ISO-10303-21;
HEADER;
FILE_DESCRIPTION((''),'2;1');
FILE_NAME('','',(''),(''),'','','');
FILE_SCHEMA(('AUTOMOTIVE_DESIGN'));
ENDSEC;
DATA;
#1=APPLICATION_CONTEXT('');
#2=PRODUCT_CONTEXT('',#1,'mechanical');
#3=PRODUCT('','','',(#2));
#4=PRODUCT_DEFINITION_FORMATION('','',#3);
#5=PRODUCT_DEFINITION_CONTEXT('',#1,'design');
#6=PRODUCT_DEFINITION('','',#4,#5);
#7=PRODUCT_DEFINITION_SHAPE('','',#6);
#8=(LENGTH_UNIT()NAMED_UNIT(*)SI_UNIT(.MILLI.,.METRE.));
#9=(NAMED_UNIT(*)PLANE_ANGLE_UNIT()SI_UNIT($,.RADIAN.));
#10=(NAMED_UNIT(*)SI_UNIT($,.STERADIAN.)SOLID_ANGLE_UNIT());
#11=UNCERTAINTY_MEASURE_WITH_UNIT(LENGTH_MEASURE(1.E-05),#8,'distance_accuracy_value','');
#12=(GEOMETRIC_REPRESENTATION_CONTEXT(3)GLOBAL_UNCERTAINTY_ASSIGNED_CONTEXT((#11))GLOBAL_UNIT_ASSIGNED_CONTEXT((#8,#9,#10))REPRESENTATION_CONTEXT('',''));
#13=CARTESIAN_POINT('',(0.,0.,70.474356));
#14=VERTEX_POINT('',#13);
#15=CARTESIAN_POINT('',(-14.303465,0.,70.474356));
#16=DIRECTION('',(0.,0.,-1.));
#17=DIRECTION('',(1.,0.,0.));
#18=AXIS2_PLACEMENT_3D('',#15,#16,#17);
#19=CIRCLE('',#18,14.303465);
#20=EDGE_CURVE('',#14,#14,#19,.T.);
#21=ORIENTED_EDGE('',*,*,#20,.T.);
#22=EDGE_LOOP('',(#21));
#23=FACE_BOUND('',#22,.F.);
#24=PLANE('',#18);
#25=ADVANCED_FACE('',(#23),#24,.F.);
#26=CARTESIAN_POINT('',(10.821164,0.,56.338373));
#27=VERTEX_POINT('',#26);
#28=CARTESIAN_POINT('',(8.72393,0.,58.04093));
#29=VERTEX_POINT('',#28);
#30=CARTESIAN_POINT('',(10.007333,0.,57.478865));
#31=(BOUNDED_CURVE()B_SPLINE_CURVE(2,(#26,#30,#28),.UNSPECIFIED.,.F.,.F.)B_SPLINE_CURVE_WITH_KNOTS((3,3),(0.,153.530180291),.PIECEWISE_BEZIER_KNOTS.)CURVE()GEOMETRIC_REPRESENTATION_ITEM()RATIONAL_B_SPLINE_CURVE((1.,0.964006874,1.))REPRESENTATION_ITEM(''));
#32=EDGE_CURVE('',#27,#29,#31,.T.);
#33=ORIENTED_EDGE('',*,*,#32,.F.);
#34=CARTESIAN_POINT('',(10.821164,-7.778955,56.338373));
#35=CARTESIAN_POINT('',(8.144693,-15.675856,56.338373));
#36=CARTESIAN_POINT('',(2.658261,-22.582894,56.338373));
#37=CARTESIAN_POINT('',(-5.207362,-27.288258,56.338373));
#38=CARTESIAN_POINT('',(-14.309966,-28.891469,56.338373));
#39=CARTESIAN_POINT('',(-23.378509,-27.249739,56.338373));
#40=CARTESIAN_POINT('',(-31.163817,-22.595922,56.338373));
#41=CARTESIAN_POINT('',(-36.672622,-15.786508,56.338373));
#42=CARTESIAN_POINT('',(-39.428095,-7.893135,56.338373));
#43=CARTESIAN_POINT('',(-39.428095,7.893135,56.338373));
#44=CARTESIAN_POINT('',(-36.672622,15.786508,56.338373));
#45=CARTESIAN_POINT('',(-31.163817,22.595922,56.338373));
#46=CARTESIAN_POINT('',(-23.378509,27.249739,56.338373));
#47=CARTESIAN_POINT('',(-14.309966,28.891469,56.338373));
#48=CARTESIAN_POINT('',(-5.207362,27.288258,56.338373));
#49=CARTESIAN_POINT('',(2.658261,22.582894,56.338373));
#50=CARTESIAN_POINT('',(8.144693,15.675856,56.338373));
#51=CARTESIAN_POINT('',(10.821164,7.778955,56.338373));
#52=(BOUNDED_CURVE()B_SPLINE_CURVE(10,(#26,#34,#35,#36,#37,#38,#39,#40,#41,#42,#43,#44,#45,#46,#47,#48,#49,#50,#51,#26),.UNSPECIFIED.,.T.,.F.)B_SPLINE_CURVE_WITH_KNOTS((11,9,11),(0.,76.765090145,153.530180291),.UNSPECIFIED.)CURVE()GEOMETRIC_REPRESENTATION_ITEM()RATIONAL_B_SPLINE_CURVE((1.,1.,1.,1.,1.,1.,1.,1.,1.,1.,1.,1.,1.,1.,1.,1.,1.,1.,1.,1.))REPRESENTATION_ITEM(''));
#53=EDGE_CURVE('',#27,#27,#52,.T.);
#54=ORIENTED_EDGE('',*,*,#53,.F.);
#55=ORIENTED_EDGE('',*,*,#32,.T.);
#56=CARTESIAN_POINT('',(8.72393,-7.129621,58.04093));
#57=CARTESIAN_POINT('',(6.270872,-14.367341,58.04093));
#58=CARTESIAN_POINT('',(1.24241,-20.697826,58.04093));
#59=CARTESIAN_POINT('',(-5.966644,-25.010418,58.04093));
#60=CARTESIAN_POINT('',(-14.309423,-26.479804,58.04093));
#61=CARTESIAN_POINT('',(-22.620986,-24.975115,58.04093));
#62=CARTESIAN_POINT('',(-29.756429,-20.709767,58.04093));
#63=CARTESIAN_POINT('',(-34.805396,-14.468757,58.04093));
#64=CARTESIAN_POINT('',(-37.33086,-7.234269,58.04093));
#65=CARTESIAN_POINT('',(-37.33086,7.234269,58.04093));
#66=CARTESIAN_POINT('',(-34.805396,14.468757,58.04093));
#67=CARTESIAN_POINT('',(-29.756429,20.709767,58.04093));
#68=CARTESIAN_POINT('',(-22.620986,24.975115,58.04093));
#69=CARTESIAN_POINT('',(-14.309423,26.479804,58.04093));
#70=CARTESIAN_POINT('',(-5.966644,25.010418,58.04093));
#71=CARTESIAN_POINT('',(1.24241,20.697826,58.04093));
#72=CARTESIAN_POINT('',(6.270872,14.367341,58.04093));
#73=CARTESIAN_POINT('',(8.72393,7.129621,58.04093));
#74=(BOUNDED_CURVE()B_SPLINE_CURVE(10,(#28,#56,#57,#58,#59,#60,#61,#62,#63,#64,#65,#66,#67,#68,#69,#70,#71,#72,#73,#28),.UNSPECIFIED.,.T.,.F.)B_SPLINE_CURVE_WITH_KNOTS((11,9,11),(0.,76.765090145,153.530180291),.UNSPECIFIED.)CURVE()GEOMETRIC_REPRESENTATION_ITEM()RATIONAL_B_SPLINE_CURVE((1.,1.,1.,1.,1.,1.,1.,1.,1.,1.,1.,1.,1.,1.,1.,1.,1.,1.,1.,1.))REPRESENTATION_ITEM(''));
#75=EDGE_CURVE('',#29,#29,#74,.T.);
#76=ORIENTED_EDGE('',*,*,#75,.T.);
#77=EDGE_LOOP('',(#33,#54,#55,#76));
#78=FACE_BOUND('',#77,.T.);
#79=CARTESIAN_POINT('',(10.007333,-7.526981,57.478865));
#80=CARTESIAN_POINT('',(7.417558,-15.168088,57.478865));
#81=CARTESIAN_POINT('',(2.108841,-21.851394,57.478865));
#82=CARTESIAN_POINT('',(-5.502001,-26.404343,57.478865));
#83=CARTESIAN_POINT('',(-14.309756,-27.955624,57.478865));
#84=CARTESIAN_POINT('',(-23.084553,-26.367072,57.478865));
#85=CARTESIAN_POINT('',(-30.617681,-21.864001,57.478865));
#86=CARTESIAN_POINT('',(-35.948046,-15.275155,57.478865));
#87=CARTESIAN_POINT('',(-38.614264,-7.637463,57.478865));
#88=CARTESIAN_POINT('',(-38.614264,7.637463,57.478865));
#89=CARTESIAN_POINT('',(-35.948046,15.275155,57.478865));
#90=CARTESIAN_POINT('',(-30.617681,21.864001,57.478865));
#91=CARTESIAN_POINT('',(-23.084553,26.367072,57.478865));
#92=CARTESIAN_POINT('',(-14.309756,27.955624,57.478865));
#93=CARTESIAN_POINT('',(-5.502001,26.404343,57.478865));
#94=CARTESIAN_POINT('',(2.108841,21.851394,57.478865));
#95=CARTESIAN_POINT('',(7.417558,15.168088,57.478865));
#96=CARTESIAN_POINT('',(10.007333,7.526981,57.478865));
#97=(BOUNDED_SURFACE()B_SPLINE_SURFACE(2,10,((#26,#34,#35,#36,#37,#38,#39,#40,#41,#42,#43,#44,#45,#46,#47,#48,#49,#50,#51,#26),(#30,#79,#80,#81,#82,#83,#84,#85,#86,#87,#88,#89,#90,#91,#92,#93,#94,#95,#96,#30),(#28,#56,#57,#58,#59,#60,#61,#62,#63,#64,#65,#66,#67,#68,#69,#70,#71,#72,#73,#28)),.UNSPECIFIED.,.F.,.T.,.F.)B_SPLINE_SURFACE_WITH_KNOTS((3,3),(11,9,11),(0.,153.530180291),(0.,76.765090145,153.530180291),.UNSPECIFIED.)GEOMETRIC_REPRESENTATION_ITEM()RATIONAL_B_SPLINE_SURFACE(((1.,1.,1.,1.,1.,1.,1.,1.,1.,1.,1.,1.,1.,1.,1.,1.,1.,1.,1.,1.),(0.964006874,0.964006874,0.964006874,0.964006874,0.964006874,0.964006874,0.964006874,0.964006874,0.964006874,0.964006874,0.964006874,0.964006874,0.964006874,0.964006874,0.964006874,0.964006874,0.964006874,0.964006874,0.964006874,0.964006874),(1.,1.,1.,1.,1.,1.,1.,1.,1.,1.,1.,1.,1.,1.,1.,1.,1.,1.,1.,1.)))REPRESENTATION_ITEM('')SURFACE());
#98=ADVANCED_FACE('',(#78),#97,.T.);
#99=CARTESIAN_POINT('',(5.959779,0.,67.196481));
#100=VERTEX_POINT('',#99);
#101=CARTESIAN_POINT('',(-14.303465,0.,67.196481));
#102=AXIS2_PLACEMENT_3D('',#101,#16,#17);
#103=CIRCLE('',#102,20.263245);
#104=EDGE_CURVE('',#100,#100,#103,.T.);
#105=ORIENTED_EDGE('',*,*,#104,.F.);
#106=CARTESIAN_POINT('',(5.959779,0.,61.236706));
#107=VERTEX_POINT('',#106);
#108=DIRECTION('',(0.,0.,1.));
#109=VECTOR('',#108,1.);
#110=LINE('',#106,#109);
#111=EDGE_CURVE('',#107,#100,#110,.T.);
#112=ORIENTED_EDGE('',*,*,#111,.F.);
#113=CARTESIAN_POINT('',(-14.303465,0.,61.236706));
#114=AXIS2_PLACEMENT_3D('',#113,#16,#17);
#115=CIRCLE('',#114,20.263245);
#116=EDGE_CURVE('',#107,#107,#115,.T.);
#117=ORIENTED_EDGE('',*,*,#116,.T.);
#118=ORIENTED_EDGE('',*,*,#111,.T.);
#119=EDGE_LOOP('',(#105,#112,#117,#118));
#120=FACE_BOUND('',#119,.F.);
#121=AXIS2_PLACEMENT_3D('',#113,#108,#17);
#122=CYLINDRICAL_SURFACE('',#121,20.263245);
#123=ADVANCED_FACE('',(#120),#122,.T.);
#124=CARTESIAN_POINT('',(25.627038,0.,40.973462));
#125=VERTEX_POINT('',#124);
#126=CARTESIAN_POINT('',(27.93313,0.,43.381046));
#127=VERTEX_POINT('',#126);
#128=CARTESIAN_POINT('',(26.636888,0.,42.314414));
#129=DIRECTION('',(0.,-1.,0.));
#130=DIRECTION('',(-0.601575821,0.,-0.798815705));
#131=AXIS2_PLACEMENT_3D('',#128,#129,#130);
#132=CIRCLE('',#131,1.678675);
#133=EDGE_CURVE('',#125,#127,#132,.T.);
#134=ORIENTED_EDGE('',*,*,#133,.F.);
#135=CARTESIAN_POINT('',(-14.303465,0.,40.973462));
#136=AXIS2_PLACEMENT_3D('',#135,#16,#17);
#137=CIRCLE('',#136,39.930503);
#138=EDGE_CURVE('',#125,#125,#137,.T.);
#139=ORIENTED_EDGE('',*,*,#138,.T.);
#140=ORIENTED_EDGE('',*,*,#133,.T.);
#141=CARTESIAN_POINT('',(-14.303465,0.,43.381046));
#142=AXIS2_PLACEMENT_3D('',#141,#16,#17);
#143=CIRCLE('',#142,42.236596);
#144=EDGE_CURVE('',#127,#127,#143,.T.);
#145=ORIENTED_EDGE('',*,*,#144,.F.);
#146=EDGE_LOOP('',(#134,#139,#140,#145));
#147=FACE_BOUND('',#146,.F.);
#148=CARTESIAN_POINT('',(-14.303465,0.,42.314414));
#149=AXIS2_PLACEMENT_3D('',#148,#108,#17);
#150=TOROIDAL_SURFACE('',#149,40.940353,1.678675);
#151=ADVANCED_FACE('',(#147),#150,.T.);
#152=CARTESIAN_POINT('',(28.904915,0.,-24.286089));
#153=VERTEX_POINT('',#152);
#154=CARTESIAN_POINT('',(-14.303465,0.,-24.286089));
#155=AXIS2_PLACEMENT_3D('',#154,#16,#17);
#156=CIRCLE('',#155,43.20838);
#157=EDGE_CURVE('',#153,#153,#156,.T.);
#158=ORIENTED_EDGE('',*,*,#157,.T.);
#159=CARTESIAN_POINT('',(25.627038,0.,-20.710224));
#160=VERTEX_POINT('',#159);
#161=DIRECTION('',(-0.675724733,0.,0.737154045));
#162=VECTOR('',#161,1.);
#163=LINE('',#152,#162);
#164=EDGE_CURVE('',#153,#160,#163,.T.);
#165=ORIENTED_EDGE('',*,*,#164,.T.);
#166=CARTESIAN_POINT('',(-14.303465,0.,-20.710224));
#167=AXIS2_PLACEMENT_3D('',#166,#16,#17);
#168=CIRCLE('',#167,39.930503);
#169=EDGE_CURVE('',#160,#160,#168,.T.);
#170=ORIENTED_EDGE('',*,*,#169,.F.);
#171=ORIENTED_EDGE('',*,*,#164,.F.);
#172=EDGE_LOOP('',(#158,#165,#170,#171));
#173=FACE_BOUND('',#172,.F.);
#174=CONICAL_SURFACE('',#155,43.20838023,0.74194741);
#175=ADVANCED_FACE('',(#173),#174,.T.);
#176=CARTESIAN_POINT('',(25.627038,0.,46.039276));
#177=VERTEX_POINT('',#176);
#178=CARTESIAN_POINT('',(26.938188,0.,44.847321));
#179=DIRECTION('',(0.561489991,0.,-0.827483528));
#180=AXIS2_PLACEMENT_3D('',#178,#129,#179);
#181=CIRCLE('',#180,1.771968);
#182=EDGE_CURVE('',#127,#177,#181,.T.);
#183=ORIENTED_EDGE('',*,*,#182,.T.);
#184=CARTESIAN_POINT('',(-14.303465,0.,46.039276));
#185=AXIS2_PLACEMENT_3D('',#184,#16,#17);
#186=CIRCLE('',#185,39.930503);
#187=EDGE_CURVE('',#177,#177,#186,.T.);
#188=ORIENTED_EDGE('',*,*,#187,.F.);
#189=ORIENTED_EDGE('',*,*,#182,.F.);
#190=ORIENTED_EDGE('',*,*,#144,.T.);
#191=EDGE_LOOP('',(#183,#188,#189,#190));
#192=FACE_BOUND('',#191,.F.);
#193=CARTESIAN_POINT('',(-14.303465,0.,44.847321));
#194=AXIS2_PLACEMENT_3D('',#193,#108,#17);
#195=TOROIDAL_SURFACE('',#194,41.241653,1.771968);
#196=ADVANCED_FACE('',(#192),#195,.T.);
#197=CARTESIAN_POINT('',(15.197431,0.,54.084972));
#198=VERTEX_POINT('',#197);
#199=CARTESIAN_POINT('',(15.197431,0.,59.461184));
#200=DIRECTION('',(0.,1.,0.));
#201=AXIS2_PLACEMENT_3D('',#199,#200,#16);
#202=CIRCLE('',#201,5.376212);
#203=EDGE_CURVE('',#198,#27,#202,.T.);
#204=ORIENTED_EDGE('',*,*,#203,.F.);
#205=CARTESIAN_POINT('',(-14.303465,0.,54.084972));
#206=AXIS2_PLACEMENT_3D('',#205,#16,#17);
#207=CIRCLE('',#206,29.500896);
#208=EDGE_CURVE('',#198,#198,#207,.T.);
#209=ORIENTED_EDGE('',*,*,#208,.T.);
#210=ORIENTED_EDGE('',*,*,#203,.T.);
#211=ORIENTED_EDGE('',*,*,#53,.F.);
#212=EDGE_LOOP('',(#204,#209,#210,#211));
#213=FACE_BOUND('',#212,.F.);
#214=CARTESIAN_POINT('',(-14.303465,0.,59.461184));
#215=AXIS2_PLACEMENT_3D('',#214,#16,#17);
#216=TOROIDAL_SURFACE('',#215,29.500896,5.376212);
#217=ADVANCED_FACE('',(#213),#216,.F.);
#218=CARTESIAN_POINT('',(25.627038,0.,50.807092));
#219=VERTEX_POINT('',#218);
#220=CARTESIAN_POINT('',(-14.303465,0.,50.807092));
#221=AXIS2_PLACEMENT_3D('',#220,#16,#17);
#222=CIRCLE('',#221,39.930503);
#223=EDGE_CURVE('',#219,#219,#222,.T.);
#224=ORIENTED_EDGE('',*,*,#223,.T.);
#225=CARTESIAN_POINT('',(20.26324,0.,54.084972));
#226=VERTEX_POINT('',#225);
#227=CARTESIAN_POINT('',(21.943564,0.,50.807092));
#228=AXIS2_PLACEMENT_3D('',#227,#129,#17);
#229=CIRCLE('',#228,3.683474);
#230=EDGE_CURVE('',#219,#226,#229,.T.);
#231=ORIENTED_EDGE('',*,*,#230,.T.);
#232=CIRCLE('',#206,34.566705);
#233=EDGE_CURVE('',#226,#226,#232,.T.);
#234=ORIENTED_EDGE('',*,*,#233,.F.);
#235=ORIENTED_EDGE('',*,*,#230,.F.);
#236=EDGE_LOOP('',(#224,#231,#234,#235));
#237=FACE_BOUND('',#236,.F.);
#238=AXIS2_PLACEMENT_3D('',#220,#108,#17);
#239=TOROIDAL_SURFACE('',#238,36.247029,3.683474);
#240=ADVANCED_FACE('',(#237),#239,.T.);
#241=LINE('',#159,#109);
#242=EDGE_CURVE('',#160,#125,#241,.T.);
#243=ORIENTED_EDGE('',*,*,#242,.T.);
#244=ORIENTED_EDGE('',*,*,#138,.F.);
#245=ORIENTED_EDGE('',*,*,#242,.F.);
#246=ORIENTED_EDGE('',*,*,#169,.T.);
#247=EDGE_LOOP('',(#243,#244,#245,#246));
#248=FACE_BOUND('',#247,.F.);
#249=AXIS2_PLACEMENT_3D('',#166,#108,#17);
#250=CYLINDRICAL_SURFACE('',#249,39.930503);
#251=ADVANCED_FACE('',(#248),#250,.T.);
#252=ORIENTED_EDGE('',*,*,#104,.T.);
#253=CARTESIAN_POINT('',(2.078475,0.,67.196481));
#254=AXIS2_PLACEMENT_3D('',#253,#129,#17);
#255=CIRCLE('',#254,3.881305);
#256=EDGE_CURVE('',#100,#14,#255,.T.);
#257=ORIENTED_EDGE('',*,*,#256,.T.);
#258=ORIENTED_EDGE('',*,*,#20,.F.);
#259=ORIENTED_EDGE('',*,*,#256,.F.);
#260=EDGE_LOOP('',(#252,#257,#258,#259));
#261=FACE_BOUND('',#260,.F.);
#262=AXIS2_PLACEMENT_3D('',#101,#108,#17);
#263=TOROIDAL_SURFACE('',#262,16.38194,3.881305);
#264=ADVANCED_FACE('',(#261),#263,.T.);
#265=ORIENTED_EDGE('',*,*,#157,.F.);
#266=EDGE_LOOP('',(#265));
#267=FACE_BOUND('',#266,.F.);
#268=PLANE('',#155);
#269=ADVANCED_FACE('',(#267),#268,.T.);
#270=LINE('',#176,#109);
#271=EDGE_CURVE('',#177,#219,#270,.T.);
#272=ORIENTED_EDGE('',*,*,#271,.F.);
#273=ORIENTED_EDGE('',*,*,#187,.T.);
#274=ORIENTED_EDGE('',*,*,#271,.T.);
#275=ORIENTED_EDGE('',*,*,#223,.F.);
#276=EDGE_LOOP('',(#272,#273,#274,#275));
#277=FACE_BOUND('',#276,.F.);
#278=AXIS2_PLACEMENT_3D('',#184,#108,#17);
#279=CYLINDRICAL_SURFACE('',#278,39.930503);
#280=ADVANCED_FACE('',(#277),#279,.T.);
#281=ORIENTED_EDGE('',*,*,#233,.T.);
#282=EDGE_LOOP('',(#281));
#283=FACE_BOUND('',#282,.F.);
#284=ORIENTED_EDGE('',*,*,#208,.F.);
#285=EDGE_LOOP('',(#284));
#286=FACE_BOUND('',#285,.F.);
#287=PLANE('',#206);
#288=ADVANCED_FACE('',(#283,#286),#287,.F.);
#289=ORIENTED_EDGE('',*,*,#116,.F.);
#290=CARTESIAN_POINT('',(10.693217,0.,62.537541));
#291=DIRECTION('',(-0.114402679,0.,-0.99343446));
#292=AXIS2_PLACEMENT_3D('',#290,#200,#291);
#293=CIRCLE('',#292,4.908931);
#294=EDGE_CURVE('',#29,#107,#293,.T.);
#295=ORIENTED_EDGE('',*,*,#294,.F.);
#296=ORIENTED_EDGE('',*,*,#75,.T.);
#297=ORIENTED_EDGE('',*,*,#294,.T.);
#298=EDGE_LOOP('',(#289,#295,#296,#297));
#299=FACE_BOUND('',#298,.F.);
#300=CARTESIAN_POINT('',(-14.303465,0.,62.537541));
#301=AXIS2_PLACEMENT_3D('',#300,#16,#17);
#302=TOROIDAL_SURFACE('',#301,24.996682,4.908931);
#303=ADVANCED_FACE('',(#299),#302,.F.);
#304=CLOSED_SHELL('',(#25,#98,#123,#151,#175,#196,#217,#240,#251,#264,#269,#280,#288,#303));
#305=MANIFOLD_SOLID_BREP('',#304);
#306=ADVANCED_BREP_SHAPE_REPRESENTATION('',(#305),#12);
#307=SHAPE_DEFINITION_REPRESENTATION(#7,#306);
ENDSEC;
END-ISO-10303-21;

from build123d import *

# Parameters (mm, degrees)
F2_R = 5.08


with BuildPart() as f1:
    # F0 (on Front) → F1 (revolve)
    with BuildSketch(Plane.XZ):
        with BuildLine():
            Line((25.6270375103, -20.7102242857), (25.6270375103, 40.9734621644))
            ThreePointArc((25.6270375103, 40.9734621644), (27.8491666489, 41.1532383904), (27.9331301745, 43.3810461754))
            ThreePointArc((27.9331301745, 43.3810461754), (28.2766730596, 46.0084963098), (25.6270375103, 46.039275825))
            Line((25.6270375103, 46.039275825), (25.6270375103, 50.8070923388))
            ThreePointArc((25.6270375103, 50.8070923388), (23.8643122828, 53.9501330087), (20.2632397413, 54.0849715471))
            Line((20.2632397413, 54.0849715471), (15.1974307373, 54.0849715471))
            ThreePointArc((15.1974307373, 54.0849715471), (12.0970574014, 55.0689926556), (10.1316217333, 57.6608404517))
            ThreePointArc((10.1316217333, 57.6608404517), (7.4985266441, 58.8104034839), (5.9597794898, 61.236705631))
            Line((5.9597794898, 61.236705631), (5.9597794898, 67.1964809299))
            ThreePointArc((5.9597794898, 67.1964809299), (3.9489469256, 70.5973425578), (0, 70.4743564129))
            Line((0, 70.4743564129), (-14.3034653738, 70.4743564129))
            Line((-14.3034653738, 70.4743564129), (-14.3034653738, -24.286089465))
            Line((-14.3034653738, -24.286089465), (28.904914856, -24.286089465))
            Line((28.904914856, -24.286089465), (25.6270375103, -20.7102242857))
        make_face()
        with BuildLine():
            ThreePointArc((25.6270375103, 43.6553657055), (26.8351751992, 43.9813365596), (27.9331301745, 43.3810461754))
            ThreePointArc((27.9331301745, 43.3810461754), (26.7288801976, 43.0877577338), (25.6270375103, 43.6553657055))
        make_face(mode=Mode.SUBTRACT)
        with BuildLine():
            ThreePointArc((25.6270375103, 43.6553657055), (26.7288801976, 43.0877577338), (27.9331301745, 43.3810461754))
            ThreePointArc((27.9331301745, 43.3810461754), (26.8351751992, 43.9813365596), (25.6270375103, 43.6553657055))
        make_face()
    revolve(axis=Axis((-14.3034653738, 0, 23.0941334739), (0, 0, -1)))

    # F2
    f2_edges = [f1.edges().sort_by_distance(p)[0] for p in [
        (-38.738552, 0, 57.66084),
    ]]
    fillet(f2_edges, radius=F2_R)


solid = f1.part
